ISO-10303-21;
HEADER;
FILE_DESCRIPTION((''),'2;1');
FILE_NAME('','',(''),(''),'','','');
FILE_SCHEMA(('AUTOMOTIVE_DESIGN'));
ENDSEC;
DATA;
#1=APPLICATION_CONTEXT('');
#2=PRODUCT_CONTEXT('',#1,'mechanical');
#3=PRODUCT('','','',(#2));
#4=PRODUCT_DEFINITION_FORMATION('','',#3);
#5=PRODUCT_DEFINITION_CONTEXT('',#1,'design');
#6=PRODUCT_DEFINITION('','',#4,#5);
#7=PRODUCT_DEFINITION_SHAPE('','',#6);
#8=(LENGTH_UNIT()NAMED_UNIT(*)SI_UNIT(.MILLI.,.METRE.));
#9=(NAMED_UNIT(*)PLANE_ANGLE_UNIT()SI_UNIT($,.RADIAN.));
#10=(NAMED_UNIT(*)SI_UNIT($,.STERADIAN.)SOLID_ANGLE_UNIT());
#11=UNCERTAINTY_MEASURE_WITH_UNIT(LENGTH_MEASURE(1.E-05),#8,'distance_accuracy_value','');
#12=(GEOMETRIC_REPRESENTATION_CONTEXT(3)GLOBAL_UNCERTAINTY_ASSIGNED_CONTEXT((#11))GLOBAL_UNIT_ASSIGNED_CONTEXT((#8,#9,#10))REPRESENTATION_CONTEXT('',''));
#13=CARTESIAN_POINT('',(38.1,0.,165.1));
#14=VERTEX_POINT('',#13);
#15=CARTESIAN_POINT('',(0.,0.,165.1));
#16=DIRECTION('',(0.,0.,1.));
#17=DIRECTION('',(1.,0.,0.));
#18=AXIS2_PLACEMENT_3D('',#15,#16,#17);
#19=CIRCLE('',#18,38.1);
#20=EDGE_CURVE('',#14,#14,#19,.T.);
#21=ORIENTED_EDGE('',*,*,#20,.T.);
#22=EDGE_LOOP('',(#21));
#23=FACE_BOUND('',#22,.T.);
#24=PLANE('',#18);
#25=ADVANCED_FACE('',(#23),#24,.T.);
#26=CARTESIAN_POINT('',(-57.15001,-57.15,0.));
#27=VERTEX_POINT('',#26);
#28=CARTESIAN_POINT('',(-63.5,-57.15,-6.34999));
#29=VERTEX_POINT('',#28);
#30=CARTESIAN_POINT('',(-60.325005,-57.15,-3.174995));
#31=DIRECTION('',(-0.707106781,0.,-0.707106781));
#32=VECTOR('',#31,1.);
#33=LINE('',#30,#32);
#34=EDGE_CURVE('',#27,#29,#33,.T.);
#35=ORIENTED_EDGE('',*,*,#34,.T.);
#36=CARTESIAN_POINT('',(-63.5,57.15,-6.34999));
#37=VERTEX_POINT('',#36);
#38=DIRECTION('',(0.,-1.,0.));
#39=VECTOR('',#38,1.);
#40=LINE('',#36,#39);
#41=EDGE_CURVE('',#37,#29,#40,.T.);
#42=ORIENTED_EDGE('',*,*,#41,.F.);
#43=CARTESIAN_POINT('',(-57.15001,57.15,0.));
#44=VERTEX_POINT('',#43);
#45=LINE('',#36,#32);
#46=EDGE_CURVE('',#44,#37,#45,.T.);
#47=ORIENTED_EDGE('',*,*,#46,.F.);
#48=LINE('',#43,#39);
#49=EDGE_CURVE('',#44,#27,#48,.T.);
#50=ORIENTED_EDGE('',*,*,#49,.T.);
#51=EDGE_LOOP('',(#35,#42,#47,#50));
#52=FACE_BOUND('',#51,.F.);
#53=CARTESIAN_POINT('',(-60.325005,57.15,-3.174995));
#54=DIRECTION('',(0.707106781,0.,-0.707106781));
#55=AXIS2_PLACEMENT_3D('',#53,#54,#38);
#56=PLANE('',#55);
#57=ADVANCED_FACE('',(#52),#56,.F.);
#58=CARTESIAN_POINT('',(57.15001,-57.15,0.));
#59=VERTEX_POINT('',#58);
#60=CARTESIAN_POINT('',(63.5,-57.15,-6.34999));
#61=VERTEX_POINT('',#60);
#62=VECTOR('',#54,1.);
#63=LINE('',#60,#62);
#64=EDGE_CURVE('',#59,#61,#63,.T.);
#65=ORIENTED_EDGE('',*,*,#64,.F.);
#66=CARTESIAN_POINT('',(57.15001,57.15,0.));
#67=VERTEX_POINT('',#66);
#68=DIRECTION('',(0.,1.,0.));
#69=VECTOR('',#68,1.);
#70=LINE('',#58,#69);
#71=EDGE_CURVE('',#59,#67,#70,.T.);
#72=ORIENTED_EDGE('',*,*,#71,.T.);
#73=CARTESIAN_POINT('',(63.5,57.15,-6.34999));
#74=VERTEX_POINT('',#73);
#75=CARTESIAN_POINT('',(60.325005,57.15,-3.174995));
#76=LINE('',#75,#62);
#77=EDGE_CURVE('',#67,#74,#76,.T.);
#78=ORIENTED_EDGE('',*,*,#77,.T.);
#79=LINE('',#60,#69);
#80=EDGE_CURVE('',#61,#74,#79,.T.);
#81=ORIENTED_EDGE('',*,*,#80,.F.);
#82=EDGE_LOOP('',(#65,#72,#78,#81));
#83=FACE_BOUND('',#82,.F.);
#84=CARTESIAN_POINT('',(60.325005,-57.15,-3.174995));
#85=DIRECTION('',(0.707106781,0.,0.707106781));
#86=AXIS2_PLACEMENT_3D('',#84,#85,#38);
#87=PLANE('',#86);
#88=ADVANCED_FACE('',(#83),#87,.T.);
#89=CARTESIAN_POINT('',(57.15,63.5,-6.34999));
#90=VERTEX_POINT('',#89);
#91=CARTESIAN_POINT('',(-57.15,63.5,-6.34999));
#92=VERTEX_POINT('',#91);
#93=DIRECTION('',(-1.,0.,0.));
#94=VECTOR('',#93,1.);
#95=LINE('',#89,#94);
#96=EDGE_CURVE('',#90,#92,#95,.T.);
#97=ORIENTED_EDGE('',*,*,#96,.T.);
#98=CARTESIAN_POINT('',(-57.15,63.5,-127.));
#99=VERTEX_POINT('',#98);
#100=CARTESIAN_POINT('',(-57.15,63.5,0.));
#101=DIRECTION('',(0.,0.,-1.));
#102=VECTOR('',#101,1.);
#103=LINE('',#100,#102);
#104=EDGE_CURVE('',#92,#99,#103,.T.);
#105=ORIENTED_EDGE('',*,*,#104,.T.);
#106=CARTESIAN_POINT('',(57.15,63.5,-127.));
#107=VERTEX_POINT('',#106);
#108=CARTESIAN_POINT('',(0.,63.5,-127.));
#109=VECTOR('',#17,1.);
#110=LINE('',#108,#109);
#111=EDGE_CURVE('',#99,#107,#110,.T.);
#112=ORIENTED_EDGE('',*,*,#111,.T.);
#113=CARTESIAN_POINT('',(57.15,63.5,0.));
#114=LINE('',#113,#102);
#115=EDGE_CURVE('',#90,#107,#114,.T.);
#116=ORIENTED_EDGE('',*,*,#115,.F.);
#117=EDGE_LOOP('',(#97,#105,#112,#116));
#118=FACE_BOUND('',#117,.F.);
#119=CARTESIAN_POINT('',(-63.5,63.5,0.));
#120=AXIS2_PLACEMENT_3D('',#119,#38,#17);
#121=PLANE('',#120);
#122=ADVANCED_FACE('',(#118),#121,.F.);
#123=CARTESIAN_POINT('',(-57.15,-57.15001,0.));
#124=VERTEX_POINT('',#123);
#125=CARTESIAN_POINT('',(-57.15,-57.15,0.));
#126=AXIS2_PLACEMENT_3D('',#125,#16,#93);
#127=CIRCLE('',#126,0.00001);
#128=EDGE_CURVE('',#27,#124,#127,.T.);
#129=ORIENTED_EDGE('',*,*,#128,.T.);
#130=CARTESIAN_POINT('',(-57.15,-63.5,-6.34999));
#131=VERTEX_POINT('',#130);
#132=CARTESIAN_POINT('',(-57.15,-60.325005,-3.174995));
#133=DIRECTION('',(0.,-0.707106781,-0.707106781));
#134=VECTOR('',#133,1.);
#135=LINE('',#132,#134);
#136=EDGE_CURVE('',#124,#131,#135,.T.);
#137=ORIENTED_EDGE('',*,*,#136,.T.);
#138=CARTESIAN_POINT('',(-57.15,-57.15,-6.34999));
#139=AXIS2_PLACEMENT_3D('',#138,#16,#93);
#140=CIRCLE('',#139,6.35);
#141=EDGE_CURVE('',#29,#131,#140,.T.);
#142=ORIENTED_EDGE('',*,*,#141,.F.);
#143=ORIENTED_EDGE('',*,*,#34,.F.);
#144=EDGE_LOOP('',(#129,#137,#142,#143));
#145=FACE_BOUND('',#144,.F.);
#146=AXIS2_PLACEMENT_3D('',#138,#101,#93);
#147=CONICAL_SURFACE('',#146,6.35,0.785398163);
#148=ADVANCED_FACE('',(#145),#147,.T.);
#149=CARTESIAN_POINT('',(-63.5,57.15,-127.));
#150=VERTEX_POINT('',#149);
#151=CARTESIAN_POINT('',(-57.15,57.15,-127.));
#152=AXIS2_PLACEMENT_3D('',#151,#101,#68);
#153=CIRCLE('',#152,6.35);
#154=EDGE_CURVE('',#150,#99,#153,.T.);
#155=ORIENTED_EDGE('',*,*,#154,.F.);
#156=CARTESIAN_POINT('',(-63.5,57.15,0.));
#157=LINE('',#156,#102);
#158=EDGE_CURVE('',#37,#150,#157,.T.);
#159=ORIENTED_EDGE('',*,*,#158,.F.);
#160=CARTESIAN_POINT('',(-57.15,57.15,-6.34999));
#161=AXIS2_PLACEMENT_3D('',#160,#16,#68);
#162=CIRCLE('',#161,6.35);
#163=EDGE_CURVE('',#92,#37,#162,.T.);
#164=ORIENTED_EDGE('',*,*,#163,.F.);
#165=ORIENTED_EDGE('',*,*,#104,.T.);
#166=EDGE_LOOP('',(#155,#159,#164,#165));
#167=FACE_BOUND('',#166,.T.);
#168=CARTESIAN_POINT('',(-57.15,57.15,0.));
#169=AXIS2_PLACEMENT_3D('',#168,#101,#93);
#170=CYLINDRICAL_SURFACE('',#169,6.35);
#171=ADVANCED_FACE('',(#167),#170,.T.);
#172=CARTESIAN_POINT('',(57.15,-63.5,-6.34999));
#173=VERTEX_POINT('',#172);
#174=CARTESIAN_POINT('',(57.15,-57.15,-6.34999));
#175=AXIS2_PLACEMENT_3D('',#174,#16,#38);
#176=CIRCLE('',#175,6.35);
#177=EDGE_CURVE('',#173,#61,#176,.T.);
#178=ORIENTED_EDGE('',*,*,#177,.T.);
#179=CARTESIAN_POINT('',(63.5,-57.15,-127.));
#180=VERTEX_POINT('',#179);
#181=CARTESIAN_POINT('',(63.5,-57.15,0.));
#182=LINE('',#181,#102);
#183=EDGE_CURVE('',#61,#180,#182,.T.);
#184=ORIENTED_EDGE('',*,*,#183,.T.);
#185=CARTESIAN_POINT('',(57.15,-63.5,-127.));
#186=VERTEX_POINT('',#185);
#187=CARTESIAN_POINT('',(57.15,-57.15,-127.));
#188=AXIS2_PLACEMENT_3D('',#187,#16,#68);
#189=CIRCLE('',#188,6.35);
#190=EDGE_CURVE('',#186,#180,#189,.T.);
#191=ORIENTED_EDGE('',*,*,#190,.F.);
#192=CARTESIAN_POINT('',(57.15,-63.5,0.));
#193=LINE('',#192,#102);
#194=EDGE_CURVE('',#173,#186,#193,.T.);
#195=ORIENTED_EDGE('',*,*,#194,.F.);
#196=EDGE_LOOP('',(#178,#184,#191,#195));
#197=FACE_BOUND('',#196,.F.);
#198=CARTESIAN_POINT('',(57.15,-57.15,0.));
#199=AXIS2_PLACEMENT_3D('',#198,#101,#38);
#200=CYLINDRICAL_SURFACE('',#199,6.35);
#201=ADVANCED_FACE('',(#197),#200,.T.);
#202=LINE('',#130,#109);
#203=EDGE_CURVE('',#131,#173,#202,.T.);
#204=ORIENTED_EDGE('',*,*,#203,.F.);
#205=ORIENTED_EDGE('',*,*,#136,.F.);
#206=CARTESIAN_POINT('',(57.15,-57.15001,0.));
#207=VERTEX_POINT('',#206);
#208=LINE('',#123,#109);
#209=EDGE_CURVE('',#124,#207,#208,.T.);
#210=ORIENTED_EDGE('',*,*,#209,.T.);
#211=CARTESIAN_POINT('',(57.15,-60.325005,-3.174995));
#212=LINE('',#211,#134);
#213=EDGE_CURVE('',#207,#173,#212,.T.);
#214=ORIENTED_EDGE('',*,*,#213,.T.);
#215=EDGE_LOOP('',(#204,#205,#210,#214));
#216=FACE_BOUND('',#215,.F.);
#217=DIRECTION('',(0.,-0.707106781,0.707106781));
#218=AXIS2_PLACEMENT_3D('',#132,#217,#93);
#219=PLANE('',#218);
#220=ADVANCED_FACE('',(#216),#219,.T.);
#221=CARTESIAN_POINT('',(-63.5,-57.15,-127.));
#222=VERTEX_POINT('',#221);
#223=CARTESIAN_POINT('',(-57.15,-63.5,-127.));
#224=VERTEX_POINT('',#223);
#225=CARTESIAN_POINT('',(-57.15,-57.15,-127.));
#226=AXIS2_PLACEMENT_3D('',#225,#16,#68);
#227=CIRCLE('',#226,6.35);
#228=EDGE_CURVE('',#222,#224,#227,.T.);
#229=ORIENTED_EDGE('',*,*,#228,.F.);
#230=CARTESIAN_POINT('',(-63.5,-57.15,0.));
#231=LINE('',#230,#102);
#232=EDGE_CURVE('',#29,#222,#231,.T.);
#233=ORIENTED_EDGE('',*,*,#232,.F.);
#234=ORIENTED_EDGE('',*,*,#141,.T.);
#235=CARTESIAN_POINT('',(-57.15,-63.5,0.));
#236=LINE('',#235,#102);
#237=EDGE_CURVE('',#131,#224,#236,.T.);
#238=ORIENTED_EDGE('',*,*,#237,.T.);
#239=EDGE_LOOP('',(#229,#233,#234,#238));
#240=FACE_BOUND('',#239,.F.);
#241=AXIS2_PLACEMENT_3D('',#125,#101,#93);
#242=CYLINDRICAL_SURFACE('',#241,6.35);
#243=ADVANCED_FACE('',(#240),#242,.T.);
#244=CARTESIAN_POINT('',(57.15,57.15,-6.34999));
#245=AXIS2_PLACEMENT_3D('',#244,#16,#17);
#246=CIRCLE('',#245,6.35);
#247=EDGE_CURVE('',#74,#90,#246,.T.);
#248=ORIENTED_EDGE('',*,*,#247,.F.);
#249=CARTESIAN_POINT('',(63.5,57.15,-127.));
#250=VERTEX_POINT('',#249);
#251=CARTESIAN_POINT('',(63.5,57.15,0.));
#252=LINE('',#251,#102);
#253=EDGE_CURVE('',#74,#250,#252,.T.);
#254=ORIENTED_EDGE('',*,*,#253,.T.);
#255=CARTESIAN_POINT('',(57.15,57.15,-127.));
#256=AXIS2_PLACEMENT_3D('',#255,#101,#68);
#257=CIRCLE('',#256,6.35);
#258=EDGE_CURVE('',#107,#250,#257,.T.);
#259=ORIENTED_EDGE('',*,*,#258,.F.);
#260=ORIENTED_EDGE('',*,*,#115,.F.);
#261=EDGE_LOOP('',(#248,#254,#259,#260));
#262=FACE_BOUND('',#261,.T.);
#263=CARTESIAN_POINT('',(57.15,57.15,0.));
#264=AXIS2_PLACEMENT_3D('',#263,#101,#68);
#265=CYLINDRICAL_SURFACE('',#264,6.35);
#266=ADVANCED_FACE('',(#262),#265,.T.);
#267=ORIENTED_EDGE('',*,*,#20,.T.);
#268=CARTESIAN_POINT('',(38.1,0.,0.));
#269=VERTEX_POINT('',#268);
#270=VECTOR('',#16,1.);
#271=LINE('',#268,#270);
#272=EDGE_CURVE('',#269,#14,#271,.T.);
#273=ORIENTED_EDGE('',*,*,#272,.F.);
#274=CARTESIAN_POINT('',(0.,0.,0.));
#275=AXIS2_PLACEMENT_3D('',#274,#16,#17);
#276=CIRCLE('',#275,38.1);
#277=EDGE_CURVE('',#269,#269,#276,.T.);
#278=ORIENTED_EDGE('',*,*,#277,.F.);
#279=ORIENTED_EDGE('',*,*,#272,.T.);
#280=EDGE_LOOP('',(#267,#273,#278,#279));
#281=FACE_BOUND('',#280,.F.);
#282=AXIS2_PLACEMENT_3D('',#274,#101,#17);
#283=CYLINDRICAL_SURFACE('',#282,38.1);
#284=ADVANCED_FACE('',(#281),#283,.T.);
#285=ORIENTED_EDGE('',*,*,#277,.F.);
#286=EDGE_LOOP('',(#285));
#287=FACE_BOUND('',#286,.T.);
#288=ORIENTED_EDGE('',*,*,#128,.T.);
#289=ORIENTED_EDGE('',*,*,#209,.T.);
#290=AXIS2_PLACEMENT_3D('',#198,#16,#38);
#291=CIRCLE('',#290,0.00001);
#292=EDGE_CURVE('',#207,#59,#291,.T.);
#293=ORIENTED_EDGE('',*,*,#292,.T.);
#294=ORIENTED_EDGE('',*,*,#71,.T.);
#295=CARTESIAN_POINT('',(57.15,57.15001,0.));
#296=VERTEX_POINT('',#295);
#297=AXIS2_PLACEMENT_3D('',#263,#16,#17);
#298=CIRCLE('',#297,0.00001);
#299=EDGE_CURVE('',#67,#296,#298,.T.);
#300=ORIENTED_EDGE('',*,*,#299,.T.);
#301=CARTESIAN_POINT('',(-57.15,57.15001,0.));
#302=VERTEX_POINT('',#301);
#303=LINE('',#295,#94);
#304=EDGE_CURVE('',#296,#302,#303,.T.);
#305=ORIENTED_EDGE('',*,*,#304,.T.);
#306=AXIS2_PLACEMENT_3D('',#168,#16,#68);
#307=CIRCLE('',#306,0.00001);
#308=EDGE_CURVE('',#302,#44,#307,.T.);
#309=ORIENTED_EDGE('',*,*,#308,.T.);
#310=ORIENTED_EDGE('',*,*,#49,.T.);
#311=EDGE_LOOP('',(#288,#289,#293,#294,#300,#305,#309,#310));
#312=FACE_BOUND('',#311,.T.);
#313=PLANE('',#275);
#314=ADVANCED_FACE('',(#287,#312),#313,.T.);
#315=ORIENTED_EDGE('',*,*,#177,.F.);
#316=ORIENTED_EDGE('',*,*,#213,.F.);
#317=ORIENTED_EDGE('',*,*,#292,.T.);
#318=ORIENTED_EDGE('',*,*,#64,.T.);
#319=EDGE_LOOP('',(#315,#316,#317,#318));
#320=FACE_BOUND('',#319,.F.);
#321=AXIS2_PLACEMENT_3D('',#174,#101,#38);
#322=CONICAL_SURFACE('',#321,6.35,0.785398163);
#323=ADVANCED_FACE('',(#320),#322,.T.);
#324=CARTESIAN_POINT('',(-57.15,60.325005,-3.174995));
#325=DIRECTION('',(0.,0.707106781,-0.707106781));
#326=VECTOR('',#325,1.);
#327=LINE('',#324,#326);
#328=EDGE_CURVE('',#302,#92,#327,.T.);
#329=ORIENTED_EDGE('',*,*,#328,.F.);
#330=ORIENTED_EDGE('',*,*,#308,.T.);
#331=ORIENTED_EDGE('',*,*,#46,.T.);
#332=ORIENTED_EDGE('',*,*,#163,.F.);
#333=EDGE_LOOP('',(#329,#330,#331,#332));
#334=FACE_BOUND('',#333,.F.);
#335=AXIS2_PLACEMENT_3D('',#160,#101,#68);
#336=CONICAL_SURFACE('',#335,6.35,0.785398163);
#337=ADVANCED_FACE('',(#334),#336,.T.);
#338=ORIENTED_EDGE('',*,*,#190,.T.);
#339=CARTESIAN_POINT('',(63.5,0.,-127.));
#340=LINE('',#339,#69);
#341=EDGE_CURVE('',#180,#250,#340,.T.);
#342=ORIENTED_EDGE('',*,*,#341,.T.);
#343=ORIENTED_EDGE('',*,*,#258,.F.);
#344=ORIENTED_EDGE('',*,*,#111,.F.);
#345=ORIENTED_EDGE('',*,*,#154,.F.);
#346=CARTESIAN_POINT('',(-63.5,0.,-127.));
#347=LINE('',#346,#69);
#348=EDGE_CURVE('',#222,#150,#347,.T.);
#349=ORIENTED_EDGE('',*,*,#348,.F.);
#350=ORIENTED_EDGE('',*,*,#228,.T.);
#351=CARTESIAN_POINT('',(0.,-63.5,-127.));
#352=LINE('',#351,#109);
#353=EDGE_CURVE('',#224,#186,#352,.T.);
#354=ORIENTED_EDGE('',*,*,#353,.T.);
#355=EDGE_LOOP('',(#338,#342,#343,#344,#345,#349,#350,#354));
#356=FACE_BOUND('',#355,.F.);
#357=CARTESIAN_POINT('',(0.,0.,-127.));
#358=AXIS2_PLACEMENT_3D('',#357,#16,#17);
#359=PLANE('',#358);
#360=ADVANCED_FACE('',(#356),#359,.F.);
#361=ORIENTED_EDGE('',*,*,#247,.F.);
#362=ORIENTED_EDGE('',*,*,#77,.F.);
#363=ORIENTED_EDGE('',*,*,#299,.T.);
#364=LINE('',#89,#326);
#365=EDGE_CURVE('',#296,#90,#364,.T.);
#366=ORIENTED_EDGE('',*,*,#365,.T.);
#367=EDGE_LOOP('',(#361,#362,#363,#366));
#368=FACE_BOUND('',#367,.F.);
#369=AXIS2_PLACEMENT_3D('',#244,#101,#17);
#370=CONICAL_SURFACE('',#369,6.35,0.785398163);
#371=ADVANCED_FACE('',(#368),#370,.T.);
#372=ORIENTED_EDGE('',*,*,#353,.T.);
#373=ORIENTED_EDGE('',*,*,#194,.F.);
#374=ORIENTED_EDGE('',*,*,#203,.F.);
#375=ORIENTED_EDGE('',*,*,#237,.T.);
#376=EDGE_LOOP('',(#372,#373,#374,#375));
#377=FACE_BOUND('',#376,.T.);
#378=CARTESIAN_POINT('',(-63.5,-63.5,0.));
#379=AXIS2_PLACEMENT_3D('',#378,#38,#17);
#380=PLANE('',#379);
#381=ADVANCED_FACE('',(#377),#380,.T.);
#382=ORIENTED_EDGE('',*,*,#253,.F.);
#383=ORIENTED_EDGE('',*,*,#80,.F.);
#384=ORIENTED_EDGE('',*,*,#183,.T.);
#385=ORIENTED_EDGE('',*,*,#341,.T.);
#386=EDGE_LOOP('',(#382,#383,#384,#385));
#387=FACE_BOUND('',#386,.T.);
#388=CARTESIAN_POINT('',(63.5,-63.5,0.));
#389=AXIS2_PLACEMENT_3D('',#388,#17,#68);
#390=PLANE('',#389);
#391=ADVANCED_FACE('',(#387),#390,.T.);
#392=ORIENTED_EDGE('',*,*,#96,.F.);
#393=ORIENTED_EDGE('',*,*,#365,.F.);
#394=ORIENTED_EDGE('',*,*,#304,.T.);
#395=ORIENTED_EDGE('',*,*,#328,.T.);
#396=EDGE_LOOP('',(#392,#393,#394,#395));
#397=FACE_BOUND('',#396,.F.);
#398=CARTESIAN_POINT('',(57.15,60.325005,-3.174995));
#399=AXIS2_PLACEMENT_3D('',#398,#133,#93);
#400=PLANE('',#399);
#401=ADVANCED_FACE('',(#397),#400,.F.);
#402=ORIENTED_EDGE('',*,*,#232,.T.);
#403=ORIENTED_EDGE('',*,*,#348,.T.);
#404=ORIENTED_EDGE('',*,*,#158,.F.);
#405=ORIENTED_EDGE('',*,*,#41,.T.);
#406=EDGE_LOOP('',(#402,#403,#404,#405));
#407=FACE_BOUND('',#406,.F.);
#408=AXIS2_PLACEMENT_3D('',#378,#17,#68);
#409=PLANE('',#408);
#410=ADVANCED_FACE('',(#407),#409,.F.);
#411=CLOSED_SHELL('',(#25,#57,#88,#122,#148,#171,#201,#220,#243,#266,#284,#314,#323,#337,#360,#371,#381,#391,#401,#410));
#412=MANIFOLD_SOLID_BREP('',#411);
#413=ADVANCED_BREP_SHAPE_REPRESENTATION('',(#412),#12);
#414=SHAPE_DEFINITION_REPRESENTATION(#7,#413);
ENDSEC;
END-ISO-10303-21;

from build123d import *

# Parameters (mm, degrees)
F0_W     = 127
F0_H     = 127
F0_R     = 38.1
F1_DEPTH = 127
F2_DEPTH = 165.1
F3_R     = 6.35
F4_SIZE  = 6.34999


# Not quite as in the source:
# - a fillet or chamfer is up to 0.001 mm smaller than in the source, because OpenCascade refuses the exact size


with BuildPart() as f1:
    # F0 (on Top) → F1 (new body)
    with BuildSketch(Plane.XY):
        Rectangle(F0_W, F0_H)
        Circle(F0_R, mode=Mode.SUBTRACT)
        Circle(F0_R)
    extrude(amount=-F1_DEPTH)

    # F0 (on Top) → F2 (join)
    with BuildSketch(Plane.XY):
        Circle(F0_R)
    extrude(amount=F2_DEPTH)

    # F3
    f3_edges = [f1.edges().sort_by_distance(p)[0] for p in [
        (-63.5, -63.5, -63.5),
        (63.5, -63.5, -63.5),
        (63.5, 63.5, -63.5),
        (-63.5, 63.5, -63.5),
    ]]
    fillet(f3_edges, radius=F3_R)

    # F4 (size 6.35 in the source; OpenCascade refuses exactly that, so slightly less here)
    f4_edges = [f1.edges().sort_by_distance(p)[0] for p in [
        (0, -63.5, 0),
    ]]
    chamfer(f4_edges, length=F4_SIZE)


solid = f1.part
